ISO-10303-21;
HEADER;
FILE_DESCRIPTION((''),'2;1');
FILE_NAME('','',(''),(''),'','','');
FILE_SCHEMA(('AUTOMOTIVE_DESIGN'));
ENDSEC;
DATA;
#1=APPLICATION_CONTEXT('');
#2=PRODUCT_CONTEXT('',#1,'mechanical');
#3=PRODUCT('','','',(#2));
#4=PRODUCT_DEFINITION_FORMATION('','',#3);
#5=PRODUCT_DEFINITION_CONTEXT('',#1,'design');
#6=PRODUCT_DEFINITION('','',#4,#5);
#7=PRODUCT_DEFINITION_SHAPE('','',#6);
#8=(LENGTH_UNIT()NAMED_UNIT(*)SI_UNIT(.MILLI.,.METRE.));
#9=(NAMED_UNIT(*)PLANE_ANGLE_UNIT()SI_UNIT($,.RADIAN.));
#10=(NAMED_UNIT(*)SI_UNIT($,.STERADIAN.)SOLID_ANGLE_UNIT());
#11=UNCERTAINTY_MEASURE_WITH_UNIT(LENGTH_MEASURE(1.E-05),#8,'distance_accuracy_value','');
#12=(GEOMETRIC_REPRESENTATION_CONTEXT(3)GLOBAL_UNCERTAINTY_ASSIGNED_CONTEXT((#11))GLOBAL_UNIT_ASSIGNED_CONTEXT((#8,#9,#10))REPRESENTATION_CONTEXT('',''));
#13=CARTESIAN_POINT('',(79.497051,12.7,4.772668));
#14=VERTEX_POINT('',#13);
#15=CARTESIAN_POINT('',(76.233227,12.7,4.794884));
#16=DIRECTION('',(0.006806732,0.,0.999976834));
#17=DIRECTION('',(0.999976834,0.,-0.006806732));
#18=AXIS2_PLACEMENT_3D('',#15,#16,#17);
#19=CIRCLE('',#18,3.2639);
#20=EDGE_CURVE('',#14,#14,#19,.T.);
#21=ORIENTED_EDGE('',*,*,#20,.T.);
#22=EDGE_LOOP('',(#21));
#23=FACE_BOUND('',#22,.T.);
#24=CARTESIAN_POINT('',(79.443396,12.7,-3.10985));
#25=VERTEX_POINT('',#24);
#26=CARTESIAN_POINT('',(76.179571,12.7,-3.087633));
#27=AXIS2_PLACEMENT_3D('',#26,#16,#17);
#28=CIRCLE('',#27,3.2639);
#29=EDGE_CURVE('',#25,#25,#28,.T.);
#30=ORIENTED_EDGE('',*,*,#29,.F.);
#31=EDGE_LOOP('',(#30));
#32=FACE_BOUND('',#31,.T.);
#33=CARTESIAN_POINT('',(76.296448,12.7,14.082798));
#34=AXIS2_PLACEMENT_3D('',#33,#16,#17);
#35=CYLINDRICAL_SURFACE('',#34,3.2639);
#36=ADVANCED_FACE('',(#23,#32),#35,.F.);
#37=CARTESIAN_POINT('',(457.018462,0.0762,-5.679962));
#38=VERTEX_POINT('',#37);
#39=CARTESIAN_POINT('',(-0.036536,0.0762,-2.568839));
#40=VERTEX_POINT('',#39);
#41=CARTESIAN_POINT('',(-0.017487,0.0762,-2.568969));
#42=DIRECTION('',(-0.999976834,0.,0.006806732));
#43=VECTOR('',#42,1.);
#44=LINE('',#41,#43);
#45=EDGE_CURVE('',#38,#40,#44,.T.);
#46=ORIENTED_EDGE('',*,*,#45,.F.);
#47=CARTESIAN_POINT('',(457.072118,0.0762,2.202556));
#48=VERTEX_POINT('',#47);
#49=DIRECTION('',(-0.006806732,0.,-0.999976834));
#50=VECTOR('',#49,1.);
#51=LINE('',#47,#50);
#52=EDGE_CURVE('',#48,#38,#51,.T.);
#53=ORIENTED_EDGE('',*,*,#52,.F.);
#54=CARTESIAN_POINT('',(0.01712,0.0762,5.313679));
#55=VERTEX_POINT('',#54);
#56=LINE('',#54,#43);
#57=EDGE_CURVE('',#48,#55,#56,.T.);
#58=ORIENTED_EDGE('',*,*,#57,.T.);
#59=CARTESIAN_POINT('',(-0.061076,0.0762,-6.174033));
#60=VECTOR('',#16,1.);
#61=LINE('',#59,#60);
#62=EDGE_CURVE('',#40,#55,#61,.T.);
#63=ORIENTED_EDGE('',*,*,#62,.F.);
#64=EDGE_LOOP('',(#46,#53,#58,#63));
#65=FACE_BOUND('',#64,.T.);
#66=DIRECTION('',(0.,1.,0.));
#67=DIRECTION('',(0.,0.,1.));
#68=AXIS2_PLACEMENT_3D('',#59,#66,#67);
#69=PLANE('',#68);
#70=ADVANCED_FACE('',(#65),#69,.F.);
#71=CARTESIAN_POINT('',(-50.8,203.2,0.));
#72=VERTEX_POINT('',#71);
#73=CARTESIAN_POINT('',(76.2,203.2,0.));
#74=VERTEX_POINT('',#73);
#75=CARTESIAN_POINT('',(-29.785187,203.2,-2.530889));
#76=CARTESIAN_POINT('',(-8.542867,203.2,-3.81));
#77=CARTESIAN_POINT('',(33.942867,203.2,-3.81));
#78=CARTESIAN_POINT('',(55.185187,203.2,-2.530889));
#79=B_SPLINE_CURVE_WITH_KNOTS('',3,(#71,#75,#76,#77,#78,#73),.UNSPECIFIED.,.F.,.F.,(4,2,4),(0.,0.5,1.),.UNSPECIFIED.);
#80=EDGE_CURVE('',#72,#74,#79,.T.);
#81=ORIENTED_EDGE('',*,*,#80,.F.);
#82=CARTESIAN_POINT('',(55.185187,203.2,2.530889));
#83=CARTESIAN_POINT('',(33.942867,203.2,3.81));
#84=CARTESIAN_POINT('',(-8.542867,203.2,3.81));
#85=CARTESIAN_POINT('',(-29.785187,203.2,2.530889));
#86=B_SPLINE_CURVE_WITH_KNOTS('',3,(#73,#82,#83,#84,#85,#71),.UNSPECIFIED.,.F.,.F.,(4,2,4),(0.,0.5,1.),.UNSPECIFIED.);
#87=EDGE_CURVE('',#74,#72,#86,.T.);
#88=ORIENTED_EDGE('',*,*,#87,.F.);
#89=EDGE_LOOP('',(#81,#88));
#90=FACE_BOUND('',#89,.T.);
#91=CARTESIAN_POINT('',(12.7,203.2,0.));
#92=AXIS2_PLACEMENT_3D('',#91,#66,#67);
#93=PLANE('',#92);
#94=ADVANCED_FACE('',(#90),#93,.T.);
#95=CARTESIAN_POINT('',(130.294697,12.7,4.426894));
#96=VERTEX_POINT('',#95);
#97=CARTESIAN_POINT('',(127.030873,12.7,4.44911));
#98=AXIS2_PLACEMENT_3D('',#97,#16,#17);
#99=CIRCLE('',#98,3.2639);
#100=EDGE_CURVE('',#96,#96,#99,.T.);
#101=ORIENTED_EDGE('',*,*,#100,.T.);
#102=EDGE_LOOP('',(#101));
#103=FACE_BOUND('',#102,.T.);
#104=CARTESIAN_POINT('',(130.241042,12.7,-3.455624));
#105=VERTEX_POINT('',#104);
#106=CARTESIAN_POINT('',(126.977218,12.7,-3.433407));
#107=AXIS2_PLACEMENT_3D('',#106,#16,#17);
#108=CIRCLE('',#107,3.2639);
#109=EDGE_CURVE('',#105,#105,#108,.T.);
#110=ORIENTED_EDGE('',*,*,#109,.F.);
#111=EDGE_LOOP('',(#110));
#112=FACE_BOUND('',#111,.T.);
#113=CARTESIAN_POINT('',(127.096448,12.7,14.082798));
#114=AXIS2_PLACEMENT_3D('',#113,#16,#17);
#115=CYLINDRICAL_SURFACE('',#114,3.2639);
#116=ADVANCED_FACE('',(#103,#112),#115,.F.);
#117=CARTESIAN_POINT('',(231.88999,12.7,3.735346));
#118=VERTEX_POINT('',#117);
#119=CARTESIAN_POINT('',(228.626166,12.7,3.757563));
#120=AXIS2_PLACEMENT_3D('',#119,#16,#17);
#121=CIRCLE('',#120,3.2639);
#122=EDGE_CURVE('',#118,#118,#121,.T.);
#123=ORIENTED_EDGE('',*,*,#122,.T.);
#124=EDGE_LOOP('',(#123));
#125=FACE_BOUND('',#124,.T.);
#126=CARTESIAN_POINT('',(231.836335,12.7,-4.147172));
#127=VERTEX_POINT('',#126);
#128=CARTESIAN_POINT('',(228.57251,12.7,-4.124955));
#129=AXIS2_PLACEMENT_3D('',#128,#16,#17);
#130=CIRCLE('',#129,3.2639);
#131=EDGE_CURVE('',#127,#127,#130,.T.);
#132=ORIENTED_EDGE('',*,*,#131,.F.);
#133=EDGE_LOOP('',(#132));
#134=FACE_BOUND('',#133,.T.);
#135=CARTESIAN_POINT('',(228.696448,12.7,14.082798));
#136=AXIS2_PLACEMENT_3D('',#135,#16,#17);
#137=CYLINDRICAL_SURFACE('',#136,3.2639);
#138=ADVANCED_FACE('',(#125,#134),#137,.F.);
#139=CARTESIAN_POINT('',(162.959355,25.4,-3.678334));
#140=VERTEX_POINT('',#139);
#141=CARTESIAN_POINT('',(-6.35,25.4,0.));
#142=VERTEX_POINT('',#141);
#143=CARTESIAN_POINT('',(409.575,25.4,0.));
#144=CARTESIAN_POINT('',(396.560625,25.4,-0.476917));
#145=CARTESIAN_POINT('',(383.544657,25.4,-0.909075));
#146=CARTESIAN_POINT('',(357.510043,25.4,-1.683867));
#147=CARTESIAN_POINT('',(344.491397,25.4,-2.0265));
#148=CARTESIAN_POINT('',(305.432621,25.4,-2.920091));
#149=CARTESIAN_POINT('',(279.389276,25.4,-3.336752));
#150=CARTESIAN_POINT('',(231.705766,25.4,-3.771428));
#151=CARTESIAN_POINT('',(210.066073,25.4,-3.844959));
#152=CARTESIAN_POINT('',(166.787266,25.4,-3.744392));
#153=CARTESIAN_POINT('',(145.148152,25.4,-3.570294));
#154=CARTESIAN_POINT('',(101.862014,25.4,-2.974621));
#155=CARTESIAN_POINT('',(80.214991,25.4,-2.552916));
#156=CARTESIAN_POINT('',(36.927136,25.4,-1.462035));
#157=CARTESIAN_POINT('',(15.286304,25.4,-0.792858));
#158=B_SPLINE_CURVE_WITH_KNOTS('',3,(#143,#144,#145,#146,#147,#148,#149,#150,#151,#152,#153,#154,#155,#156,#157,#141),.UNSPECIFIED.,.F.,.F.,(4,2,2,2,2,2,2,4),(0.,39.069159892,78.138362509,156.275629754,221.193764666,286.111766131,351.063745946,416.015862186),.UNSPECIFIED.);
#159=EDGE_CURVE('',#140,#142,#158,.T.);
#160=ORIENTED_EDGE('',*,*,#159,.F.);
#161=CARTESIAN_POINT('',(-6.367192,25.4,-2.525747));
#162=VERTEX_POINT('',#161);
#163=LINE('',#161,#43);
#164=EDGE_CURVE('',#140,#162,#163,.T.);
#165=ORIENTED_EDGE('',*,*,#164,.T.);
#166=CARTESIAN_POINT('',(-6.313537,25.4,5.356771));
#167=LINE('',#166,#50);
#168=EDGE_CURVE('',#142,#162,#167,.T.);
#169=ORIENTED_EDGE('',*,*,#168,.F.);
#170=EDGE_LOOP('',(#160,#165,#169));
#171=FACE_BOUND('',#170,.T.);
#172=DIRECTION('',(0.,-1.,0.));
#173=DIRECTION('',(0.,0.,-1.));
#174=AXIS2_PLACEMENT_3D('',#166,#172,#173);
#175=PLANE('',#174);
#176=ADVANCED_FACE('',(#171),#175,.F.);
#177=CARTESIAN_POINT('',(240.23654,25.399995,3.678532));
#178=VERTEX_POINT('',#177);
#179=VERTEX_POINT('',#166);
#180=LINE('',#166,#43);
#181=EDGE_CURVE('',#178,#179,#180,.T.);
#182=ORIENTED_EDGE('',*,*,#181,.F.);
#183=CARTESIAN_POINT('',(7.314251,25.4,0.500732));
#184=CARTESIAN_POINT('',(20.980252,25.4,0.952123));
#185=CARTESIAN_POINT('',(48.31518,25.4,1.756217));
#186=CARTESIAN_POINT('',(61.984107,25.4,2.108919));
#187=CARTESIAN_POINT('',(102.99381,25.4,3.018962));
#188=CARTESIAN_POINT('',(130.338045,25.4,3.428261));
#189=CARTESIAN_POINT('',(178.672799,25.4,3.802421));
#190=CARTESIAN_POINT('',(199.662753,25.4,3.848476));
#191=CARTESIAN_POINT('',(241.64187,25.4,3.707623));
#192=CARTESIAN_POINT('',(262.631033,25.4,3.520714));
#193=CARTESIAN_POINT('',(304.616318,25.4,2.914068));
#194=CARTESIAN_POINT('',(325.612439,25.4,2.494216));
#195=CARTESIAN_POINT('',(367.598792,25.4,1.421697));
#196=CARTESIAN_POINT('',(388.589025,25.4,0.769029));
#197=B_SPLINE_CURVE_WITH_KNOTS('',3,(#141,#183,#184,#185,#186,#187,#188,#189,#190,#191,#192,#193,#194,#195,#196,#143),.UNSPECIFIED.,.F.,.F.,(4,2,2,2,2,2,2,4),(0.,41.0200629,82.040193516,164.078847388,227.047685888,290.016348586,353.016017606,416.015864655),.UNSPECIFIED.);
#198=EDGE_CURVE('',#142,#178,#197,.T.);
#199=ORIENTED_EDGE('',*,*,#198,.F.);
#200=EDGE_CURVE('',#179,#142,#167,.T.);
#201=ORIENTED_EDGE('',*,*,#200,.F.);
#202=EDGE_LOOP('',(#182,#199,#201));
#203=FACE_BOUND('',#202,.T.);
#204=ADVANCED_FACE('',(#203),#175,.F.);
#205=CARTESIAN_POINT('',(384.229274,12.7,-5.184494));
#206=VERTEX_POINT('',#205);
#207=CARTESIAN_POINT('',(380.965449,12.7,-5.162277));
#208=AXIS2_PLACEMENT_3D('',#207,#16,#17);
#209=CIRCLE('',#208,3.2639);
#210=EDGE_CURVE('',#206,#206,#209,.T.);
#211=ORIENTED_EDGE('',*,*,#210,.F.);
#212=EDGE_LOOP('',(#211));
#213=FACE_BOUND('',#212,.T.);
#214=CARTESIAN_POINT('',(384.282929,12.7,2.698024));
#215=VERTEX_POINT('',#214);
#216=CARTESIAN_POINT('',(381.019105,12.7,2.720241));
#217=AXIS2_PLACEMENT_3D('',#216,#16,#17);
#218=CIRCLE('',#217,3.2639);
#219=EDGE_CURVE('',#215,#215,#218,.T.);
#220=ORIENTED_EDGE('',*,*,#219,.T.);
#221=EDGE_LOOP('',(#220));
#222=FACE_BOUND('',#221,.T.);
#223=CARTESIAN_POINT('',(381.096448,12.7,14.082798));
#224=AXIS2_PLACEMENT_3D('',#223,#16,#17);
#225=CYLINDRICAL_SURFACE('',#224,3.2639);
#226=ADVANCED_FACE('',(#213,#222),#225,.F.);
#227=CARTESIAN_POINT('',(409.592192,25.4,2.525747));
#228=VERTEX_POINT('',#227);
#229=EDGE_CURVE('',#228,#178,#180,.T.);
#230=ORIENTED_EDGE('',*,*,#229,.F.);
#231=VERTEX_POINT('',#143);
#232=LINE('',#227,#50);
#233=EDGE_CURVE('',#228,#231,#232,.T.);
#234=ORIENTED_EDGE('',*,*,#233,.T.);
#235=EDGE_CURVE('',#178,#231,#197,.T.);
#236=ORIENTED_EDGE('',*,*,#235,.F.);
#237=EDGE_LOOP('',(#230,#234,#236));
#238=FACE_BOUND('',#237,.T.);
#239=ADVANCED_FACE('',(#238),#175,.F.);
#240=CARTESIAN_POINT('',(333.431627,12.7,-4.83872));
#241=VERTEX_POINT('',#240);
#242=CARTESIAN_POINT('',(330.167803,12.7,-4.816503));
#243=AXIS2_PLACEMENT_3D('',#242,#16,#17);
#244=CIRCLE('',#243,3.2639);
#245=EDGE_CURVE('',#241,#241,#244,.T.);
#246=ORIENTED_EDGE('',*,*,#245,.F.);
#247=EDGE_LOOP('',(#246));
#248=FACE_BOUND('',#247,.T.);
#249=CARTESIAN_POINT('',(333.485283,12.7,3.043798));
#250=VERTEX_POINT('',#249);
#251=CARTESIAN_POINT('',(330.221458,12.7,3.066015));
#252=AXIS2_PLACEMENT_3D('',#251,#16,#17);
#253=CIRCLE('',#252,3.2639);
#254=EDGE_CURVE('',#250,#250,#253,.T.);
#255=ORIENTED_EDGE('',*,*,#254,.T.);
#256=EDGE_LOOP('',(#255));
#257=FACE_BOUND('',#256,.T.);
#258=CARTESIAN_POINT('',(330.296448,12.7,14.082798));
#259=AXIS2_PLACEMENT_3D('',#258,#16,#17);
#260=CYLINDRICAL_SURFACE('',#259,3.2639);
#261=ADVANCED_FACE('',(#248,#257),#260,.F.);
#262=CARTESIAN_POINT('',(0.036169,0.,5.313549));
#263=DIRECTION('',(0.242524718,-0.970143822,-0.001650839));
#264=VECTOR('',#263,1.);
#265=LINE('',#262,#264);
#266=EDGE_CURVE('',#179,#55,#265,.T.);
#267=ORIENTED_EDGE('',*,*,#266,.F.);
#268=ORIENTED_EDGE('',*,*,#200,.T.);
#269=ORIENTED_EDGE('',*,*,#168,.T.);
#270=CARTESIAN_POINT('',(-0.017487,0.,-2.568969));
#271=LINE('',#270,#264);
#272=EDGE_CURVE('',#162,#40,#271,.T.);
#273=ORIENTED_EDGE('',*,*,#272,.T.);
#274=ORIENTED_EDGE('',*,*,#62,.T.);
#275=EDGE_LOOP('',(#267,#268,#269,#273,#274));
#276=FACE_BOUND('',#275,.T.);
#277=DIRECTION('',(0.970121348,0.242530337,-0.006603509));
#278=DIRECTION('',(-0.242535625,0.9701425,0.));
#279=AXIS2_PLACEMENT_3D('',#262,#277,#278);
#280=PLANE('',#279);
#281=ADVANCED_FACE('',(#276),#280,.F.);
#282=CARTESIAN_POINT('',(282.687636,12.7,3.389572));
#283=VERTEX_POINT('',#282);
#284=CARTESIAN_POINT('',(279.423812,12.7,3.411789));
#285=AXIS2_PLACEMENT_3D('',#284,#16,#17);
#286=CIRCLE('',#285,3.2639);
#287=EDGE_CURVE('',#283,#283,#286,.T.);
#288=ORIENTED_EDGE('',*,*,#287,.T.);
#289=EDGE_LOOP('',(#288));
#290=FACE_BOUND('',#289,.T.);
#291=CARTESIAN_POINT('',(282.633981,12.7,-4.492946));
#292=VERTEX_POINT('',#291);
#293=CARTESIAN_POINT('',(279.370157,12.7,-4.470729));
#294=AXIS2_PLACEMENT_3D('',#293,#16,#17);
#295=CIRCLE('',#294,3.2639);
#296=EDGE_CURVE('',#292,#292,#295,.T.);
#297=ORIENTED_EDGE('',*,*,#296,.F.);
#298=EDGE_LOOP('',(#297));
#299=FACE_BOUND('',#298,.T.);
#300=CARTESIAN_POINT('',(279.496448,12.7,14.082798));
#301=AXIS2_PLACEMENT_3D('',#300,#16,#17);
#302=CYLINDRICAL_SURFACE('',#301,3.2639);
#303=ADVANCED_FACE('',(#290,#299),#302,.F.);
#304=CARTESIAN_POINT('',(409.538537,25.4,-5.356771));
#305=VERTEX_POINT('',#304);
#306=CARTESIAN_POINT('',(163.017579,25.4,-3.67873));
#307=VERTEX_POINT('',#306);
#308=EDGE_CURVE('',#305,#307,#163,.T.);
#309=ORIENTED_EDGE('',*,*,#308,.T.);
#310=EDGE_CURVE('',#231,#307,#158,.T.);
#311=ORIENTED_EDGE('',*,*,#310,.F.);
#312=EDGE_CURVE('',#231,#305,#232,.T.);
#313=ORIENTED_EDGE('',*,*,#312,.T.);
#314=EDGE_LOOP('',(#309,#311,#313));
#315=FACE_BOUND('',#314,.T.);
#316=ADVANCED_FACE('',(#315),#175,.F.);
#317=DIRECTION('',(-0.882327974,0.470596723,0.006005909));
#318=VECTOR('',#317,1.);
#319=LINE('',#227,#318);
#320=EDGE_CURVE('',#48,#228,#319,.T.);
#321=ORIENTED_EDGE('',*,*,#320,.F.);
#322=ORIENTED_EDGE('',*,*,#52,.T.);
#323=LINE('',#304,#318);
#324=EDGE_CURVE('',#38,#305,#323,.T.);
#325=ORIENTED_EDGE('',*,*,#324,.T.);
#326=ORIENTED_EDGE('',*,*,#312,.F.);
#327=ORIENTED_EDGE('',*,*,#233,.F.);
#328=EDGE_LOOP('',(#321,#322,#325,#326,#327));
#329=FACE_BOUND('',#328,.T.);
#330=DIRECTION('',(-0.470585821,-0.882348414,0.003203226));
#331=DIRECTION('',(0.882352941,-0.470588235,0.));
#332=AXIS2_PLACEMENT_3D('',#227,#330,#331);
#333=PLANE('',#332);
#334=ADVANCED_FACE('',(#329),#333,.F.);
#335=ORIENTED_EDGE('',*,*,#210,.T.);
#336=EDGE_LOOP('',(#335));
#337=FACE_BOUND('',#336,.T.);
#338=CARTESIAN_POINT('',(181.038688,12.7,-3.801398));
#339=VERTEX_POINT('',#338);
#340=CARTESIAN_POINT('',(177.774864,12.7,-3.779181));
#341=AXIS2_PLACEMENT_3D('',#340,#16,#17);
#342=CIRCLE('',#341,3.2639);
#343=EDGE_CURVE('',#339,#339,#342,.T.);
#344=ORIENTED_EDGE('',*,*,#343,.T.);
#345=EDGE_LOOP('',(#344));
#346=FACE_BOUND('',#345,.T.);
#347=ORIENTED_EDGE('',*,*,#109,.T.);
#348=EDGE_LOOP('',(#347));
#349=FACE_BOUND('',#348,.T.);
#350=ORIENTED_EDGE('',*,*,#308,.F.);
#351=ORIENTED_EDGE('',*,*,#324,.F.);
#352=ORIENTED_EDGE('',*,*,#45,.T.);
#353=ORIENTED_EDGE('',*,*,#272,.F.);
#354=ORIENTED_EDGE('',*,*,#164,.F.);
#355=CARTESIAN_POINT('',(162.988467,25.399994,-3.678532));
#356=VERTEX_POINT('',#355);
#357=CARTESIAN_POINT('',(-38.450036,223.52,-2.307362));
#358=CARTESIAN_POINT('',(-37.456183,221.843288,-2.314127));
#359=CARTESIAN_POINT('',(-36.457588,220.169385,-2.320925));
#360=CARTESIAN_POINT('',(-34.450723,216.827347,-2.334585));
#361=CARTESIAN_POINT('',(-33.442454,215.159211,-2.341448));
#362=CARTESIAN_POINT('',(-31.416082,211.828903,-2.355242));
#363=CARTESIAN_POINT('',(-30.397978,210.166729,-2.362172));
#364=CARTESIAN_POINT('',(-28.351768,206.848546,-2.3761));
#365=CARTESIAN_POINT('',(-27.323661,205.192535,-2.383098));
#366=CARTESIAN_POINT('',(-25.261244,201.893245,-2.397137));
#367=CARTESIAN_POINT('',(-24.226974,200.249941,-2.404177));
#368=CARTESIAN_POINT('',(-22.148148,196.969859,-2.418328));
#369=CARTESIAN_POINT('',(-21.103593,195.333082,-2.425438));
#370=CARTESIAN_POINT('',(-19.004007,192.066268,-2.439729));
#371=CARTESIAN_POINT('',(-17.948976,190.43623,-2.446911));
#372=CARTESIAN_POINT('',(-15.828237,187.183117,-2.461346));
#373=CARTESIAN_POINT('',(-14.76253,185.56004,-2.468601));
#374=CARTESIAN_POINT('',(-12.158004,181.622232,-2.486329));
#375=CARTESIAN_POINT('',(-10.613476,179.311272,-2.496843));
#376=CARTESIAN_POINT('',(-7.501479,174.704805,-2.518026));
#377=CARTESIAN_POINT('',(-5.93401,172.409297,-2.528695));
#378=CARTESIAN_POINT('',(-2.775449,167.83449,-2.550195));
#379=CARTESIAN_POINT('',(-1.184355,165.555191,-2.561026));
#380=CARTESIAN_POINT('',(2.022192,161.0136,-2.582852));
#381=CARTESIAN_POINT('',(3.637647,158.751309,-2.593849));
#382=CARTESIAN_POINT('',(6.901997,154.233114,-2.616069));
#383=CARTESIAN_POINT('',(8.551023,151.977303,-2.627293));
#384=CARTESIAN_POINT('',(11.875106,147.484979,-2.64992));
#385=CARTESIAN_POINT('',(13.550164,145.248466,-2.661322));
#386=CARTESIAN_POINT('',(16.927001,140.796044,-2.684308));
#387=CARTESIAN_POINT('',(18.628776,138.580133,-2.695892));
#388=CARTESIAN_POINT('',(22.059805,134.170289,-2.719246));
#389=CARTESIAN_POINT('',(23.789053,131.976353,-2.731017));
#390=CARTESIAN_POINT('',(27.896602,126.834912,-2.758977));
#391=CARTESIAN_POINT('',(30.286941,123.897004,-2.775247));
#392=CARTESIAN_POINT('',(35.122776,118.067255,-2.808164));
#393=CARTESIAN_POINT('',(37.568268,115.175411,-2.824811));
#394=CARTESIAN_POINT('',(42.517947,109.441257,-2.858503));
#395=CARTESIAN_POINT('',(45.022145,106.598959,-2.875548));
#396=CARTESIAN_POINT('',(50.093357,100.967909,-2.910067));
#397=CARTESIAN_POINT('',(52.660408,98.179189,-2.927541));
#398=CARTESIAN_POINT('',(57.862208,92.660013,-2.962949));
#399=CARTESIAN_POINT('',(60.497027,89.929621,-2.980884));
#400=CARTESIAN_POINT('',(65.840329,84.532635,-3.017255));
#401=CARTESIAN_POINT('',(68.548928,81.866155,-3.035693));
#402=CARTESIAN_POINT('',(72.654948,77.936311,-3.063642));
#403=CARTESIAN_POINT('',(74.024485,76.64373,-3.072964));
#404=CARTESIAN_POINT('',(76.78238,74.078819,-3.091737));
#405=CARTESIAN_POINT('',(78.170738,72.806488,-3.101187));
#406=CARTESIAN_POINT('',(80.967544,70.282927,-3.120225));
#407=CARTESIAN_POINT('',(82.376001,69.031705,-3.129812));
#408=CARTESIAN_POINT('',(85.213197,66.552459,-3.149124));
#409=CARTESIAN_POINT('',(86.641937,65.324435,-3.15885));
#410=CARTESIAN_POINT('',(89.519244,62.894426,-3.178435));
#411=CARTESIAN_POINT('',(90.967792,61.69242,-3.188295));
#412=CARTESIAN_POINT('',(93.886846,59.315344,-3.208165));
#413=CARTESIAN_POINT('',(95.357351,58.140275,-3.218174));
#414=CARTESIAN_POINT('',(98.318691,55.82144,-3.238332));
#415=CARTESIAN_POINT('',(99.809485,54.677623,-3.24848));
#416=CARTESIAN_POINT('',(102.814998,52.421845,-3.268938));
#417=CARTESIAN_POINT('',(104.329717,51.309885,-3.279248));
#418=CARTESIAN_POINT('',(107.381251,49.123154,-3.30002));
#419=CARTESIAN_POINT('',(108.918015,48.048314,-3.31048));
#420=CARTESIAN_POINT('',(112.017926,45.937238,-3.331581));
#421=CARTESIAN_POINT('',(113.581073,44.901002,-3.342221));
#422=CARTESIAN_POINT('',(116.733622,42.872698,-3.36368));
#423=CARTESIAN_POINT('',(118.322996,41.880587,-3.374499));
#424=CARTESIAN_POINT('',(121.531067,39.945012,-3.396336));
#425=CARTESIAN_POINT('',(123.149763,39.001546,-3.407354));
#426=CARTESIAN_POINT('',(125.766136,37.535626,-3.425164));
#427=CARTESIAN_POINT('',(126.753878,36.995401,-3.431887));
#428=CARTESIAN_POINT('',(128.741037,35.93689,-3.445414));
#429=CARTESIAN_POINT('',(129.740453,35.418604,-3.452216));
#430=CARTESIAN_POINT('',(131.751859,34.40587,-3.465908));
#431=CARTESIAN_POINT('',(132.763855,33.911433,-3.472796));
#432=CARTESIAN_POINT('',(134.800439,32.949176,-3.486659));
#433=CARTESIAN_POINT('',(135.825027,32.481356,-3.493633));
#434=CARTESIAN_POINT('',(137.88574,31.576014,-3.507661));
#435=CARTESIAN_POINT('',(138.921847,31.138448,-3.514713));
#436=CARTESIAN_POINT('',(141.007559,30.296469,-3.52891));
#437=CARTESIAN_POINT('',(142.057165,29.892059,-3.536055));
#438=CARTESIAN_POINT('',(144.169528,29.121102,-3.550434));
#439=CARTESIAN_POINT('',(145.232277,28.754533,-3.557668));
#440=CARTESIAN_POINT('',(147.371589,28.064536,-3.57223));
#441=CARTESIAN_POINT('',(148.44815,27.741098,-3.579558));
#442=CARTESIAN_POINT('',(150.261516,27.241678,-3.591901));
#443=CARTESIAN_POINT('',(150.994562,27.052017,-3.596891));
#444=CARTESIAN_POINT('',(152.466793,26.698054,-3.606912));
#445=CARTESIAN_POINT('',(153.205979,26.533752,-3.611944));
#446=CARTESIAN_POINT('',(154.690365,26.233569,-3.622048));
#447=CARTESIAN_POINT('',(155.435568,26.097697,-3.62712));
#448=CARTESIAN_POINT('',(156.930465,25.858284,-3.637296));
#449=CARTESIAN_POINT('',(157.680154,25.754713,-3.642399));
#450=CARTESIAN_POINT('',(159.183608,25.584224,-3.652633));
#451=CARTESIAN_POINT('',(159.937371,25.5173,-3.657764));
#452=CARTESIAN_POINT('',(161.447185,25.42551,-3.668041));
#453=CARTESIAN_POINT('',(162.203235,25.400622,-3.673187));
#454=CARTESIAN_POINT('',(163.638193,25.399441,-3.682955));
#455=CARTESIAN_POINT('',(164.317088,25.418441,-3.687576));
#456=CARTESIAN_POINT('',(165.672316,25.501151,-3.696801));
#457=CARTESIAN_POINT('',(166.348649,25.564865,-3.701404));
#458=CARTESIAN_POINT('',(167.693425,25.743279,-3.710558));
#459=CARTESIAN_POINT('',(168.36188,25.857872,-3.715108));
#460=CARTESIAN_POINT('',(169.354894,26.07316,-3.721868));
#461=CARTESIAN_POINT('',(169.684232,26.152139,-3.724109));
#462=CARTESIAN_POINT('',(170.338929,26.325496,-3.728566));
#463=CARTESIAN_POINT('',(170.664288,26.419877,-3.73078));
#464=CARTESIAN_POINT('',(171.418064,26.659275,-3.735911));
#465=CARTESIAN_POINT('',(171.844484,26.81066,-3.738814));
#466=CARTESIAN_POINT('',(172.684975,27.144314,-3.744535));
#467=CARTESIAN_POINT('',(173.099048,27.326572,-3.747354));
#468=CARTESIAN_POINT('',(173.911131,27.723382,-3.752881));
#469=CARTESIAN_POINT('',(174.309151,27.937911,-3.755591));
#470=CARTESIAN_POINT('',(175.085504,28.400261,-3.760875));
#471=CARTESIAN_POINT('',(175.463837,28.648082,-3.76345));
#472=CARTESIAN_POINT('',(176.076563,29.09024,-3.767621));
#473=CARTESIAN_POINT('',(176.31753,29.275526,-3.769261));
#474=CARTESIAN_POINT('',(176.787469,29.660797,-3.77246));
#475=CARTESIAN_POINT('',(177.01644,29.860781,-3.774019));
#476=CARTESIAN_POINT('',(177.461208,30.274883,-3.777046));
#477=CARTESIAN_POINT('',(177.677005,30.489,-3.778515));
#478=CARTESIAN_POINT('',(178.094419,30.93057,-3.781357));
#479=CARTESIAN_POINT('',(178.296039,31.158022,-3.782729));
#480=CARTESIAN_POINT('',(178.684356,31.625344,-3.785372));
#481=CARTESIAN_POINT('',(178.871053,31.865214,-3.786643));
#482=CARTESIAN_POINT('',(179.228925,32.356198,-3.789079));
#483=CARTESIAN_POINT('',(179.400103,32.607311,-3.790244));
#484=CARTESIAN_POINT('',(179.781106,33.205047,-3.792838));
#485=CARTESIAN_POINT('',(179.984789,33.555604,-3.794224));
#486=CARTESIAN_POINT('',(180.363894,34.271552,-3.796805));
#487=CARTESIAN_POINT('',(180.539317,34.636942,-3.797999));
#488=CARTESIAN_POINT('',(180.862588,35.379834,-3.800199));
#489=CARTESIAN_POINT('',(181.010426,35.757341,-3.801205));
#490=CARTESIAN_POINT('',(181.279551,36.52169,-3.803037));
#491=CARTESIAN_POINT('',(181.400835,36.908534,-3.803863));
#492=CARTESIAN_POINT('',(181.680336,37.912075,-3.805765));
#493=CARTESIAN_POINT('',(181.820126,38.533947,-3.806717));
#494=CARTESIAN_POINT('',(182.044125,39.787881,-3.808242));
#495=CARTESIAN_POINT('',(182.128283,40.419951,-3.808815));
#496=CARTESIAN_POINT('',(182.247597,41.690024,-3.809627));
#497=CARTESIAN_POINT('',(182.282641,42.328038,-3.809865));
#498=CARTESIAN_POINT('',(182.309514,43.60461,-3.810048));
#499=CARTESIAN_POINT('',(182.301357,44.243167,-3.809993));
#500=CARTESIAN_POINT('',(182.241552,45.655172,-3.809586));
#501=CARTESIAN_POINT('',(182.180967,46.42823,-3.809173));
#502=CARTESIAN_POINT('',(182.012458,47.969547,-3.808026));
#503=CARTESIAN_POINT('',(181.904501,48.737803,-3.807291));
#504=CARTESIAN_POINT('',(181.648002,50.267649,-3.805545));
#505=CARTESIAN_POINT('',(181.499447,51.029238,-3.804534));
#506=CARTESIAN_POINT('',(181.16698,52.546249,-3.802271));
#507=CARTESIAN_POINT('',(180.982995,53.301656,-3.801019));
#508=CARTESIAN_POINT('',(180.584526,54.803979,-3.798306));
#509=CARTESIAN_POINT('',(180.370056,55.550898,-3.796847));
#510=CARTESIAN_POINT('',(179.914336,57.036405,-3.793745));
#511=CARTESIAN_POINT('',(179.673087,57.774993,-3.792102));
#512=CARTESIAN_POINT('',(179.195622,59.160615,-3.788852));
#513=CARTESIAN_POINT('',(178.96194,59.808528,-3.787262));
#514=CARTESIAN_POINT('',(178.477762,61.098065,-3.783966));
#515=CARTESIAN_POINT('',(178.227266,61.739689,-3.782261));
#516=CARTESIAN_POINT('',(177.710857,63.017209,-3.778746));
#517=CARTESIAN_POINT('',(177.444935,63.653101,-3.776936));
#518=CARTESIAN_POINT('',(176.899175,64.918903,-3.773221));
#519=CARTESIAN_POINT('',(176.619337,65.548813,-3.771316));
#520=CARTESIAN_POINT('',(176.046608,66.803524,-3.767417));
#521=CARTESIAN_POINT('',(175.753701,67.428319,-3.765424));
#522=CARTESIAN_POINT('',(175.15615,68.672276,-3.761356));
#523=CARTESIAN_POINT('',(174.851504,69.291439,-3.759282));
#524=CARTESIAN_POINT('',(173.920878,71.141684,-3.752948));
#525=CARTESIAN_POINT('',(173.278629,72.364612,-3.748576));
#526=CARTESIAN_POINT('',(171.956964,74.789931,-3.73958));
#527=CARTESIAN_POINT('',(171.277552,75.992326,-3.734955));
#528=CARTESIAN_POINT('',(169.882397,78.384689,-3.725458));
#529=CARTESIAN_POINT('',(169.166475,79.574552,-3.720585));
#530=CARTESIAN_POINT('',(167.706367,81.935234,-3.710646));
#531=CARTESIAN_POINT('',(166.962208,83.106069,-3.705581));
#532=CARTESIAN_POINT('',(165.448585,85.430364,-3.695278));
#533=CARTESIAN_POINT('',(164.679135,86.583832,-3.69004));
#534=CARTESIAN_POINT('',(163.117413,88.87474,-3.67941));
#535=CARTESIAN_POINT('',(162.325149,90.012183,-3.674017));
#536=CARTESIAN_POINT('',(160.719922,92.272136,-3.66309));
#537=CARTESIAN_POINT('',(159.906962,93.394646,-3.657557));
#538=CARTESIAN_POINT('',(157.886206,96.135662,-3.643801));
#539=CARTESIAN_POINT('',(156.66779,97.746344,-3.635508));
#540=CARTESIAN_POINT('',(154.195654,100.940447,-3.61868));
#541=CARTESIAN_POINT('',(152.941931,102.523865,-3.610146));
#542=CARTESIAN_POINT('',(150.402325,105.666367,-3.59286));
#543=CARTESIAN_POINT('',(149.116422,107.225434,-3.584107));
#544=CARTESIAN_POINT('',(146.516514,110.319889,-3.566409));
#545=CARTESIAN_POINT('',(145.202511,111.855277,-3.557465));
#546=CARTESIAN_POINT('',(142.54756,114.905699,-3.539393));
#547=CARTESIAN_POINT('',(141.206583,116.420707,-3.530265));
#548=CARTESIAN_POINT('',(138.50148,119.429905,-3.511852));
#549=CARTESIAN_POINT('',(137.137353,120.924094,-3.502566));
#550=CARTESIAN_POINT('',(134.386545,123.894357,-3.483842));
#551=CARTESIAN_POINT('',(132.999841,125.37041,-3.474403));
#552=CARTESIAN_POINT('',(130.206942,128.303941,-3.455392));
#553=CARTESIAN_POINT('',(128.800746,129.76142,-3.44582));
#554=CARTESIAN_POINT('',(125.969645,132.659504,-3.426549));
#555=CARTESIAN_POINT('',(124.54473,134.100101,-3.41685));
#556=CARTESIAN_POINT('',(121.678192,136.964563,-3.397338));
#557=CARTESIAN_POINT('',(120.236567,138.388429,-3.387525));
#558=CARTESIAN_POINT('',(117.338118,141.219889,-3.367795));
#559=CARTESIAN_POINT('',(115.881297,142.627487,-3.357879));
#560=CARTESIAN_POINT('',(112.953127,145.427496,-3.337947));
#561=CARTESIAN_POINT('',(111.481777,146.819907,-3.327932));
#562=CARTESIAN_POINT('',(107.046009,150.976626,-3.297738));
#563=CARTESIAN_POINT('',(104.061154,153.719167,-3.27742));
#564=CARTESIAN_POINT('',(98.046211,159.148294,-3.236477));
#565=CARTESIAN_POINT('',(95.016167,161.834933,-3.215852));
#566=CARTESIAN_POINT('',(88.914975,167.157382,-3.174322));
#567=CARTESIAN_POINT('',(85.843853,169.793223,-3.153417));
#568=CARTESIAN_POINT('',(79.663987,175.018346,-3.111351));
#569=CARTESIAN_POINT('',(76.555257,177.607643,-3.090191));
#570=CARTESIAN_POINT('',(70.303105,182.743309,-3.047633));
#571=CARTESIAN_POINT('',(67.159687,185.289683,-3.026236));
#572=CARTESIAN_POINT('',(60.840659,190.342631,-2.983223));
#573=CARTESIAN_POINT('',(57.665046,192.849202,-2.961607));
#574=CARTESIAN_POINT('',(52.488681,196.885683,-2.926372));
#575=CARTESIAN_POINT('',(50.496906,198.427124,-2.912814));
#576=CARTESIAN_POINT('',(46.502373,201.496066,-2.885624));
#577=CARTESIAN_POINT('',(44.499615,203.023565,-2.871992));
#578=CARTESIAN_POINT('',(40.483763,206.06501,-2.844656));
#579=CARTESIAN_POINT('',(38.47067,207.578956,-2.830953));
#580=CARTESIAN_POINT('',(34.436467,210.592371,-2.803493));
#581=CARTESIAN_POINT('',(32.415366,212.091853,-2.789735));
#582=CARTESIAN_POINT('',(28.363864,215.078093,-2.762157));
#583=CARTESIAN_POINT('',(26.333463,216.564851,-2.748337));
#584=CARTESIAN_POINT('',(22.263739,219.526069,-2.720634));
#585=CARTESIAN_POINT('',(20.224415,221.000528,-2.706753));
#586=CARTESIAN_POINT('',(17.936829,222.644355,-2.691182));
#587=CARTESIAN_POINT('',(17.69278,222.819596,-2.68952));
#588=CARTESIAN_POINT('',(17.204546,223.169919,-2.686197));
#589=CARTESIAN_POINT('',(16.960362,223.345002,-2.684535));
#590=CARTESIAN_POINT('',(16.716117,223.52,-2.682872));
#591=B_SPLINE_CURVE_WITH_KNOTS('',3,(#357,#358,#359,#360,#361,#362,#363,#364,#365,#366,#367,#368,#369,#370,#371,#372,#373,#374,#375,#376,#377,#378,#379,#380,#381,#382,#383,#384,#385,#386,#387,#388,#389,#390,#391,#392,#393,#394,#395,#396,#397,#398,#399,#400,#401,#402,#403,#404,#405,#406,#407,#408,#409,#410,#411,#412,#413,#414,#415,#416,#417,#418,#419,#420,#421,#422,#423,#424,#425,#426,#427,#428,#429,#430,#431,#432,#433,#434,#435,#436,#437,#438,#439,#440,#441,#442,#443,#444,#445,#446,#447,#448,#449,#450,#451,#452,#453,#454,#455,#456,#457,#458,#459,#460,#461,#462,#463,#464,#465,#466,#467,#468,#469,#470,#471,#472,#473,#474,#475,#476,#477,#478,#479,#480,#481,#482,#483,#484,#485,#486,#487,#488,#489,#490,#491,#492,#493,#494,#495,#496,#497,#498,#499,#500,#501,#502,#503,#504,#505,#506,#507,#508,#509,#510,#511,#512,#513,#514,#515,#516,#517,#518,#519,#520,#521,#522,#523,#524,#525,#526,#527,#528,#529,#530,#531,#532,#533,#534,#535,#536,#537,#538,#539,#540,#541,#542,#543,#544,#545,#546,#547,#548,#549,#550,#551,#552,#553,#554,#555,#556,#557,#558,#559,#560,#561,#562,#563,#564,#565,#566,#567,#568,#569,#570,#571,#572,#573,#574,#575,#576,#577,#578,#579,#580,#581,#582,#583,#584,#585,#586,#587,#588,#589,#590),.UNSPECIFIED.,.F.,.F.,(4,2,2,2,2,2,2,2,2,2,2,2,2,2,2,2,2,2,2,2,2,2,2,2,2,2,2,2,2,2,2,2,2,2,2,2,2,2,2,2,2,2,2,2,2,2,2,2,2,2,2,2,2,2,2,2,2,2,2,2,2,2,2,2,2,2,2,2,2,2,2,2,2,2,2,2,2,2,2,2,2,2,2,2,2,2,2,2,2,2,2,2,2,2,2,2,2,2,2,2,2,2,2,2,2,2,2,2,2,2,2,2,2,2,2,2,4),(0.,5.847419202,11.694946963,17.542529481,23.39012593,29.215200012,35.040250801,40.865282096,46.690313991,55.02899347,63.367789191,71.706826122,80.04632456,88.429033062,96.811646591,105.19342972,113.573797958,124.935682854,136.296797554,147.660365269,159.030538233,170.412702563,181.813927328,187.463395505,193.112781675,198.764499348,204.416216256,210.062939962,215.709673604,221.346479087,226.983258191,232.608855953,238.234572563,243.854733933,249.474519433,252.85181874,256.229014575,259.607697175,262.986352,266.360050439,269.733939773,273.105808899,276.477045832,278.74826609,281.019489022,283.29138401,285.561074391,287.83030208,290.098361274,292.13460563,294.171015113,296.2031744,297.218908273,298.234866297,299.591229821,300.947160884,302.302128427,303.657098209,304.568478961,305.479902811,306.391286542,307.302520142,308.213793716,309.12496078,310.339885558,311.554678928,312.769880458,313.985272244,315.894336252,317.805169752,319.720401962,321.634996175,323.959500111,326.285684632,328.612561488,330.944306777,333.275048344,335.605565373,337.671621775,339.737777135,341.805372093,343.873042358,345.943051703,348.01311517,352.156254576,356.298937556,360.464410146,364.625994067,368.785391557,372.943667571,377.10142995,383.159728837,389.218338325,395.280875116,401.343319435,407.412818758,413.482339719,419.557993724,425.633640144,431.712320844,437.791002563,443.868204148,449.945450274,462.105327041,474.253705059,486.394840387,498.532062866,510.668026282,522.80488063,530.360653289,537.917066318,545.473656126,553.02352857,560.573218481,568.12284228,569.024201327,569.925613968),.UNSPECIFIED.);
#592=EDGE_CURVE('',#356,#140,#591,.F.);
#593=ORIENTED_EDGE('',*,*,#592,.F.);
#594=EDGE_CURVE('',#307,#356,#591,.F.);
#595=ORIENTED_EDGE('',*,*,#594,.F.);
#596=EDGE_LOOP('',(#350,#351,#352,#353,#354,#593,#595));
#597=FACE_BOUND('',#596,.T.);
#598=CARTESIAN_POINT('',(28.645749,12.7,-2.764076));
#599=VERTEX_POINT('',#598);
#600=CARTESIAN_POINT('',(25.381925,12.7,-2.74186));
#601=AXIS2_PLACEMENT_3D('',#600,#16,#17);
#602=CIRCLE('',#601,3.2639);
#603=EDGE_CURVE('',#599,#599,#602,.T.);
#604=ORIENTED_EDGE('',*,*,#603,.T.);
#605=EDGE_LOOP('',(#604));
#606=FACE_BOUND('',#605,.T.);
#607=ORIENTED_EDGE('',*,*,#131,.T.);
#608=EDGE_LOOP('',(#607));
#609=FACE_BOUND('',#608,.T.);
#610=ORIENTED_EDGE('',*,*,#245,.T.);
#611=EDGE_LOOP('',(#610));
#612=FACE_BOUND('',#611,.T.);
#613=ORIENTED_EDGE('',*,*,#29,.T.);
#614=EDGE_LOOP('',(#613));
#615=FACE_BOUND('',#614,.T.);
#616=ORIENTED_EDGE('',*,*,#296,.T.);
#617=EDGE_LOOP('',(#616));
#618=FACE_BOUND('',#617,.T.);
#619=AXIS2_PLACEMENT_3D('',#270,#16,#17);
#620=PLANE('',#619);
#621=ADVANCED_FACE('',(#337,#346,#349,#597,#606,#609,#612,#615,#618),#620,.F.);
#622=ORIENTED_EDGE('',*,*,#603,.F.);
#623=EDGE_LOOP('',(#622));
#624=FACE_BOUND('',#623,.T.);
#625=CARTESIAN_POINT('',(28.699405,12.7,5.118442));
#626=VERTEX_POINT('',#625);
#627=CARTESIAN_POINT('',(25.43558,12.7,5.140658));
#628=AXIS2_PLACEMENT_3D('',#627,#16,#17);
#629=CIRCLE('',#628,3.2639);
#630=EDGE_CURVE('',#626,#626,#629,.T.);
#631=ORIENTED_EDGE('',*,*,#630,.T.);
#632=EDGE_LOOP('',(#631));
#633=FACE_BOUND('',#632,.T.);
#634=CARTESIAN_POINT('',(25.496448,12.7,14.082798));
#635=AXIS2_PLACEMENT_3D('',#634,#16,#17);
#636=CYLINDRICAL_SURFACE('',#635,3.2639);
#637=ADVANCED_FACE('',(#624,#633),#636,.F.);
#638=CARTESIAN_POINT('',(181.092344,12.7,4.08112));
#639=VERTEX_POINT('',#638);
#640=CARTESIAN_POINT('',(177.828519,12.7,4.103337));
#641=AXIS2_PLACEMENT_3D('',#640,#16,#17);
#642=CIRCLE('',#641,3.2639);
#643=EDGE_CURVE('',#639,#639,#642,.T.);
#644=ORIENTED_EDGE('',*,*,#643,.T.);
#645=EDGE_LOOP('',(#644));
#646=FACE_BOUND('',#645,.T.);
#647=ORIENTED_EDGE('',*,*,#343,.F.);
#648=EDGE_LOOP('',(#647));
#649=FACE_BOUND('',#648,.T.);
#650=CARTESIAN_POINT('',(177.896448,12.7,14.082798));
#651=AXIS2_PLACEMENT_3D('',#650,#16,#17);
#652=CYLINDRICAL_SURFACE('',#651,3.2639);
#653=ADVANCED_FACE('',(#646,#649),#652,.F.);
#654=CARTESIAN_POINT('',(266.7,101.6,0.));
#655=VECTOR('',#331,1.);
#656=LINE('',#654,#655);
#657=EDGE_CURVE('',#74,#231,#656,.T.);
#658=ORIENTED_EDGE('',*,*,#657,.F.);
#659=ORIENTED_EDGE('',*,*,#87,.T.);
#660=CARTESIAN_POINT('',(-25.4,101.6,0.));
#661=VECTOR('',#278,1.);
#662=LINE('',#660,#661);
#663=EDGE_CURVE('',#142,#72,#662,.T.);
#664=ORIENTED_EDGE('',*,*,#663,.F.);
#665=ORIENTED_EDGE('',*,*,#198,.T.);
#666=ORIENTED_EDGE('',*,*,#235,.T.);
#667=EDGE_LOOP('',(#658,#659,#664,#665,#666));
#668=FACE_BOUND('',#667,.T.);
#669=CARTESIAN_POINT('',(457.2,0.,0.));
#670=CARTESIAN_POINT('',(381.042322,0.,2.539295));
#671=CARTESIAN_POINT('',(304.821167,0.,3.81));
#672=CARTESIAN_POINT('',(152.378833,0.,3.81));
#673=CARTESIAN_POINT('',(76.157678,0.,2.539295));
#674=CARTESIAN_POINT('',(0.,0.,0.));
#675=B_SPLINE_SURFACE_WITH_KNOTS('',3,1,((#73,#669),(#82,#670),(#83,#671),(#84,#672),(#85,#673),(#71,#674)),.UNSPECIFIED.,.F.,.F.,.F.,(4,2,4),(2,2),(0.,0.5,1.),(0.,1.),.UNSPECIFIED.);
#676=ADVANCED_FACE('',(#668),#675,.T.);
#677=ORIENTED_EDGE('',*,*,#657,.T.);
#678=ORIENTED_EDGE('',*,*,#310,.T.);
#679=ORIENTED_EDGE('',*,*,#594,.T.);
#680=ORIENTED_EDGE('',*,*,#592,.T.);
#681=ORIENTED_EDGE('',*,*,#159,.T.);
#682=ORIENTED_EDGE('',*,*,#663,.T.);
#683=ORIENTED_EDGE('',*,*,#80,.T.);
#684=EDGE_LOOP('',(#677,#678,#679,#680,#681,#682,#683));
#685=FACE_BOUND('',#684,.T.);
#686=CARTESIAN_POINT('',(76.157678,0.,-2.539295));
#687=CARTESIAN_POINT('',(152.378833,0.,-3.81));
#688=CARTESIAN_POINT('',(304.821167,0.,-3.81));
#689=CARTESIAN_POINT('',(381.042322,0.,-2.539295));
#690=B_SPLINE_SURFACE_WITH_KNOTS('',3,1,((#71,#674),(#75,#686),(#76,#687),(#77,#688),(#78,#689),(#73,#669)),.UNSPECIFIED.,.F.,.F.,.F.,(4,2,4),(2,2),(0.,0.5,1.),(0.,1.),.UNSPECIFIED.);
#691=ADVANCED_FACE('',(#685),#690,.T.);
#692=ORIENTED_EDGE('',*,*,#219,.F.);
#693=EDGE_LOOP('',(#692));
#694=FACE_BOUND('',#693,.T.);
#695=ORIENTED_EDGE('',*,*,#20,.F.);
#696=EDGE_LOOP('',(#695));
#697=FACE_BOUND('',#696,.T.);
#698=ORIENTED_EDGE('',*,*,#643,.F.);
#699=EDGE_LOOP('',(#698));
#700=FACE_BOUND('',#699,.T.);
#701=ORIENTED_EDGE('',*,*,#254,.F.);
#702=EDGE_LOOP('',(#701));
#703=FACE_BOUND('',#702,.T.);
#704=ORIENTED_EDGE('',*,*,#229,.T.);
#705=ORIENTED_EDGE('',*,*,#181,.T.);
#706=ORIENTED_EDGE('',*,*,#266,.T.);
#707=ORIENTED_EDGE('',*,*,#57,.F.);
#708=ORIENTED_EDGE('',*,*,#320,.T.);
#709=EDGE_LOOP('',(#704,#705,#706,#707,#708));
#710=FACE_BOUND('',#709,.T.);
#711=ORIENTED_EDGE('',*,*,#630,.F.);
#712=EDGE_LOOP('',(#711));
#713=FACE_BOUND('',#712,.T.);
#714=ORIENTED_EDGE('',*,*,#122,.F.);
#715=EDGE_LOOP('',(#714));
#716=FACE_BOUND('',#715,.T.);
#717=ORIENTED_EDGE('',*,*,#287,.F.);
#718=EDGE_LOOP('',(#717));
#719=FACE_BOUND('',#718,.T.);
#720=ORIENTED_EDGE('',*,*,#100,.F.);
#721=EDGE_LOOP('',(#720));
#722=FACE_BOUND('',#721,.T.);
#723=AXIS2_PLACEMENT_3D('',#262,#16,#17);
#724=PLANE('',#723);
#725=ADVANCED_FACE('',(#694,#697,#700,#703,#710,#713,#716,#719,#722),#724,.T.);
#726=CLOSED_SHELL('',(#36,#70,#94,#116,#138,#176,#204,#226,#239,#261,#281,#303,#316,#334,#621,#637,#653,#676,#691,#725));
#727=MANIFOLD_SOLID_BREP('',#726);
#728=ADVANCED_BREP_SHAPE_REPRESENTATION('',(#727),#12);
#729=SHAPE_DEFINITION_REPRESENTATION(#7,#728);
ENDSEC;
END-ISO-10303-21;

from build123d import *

# Parameters (mm, degrees)
BOSS_EXTRUDE1_DEPTH     = 7.882700516
CUT_EXTRUDE1_DEPTH      = 501.367921145
CUT_EXTRUDE1_DEPTH_BACK = 501.367921145
SKETCH12_W              = 6.35
SKETCH12_H              = 25.4
F_1_4_CLEARANCE_HOLE1_D = 6.5278
LPATTERN1_COUNT         = 8
LPATTERN1_PITCH         = 50.8
SKETCH14_W              = 457.208458034
SKETCH14_H              = 25.4
CUT_EXTRUDE2_DEPTH      = 501.423410323


with BuildPart() as part:
    # Sketch5 for Loft4 → Loft4 section 0
    with BuildSketch(Plane(origin=(0, 203.2, 0), x_dir=(1, 0, 0), z_dir=(0, 1, 0))):
        with BuildLine():
            # circular arc as an exact rational Bezier (weights 1, cos(half-angle), 1)
            Bezier((-50.8, 0), (12.7, 7.647531112), (76.2, 0), weights=[1, 0.992825827, 1])
            Bezier((76.2, 0), (12.7, -7.647531112), (-50.8, 0), weights=[1, 0.992825827, 1])
        make_face()
    # Sketch1 for Loft4 → Loft4 section 1
    with BuildSketch(Plane(origin=(0, 0, 0), x_dir=(1, 0, 0), z_dir=(0, 1, 0))):
        with BuildLine():
            Bezier((0, 0), (228.6, 7.622117255), (457.2, 0), weights=[1, 0.999444599, 1])
            Bezier((457.2, 0), (228.6, -7.622117255), (0, 0), weights=[1, 0.999444599, 1])
        make_face()
    loft()

    # Sketch10 → Boss-Extrude1 (add)
    with BuildSketch(Plane(origin=(-0.017486684, 0, -2.568968528), x_dir=(0, -1, 0), z_dir=(0.006806731520561807, 0, 0.9999768339346702))):
        Polygon((0, 457.189408475), (0, 0), (-25.4, -6.349852895), (-25.4, 409.565511759), align=None)
    extrude(amount=BOSS_EXTRUDE1_DEPTH)

    # Sketch12 → Cut-Extrude1 (cut, two sides: drawn at the far end of the back side and taken through both)
    with BuildSketch(Plane(origin=(0, 0, 0), x_dir=(0.006806731520561808, 0, 0.9999768339346702), z_dir=(-0.9999768339346703, 0, 0.006806731520561808)).offset(-CUT_EXTRUDE1_DEPTH_BACK)):
        with Locations((8.488672474, 12.7)):
            Rectangle(SKETCH12_W, SKETCH12_H)
        with Locations((-5.744028042, 12.7)):
            Rectangle(SKETCH12_W, SKETCH12_H)
    extrude(amount=CUT_EXTRUDE1_DEPTH + CUT_EXTRUDE1_DEPTH_BACK, mode=Mode.SUBTRACT)

    # 1/4 Clearance Hole1 (through all)
    with Locations(Plane(origin=(0.097036893, 0, 14.25568857), x_dir=(0, -1, 0), z_dir=(0.006806731520561807, 0, 0.9999768339346702))):
        with Locations((-12.7, 25.4)):
            f_1_4_clearance_hole1 = Hole(F_1_4_CLEARANCE_HOLE1_D / 2)

    # LPattern1: 1/4 Clearance Hole1 ×8
    with Locations(*[(i * LPATTERN1_PITCH, 0, 0) for i in range(1, LPATTERN1_COUNT)]):
        add(f_1_4_clearance_hole1, mode=Mode.SUBTRACT)

    # Sketch14 → Cut-Extrude2 (cut, through all)
    with BuildSketch(Plane(origin=(0.036168742, 0, 5.313549377), x_dir=(0.9999768339346702, 0, -0.006806731520561792), z_dir=(0.006806731520561792, 0, 0.9999768339346703))):
        with Locations((228.585179458, -12.6238)):
            Rectangle(SKETCH14_W, SKETCH14_H)
    extrude(amount=-CUT_EXTRUDE2_DEPTH, mode=Mode.SUBTRACT)


solid = part.part
